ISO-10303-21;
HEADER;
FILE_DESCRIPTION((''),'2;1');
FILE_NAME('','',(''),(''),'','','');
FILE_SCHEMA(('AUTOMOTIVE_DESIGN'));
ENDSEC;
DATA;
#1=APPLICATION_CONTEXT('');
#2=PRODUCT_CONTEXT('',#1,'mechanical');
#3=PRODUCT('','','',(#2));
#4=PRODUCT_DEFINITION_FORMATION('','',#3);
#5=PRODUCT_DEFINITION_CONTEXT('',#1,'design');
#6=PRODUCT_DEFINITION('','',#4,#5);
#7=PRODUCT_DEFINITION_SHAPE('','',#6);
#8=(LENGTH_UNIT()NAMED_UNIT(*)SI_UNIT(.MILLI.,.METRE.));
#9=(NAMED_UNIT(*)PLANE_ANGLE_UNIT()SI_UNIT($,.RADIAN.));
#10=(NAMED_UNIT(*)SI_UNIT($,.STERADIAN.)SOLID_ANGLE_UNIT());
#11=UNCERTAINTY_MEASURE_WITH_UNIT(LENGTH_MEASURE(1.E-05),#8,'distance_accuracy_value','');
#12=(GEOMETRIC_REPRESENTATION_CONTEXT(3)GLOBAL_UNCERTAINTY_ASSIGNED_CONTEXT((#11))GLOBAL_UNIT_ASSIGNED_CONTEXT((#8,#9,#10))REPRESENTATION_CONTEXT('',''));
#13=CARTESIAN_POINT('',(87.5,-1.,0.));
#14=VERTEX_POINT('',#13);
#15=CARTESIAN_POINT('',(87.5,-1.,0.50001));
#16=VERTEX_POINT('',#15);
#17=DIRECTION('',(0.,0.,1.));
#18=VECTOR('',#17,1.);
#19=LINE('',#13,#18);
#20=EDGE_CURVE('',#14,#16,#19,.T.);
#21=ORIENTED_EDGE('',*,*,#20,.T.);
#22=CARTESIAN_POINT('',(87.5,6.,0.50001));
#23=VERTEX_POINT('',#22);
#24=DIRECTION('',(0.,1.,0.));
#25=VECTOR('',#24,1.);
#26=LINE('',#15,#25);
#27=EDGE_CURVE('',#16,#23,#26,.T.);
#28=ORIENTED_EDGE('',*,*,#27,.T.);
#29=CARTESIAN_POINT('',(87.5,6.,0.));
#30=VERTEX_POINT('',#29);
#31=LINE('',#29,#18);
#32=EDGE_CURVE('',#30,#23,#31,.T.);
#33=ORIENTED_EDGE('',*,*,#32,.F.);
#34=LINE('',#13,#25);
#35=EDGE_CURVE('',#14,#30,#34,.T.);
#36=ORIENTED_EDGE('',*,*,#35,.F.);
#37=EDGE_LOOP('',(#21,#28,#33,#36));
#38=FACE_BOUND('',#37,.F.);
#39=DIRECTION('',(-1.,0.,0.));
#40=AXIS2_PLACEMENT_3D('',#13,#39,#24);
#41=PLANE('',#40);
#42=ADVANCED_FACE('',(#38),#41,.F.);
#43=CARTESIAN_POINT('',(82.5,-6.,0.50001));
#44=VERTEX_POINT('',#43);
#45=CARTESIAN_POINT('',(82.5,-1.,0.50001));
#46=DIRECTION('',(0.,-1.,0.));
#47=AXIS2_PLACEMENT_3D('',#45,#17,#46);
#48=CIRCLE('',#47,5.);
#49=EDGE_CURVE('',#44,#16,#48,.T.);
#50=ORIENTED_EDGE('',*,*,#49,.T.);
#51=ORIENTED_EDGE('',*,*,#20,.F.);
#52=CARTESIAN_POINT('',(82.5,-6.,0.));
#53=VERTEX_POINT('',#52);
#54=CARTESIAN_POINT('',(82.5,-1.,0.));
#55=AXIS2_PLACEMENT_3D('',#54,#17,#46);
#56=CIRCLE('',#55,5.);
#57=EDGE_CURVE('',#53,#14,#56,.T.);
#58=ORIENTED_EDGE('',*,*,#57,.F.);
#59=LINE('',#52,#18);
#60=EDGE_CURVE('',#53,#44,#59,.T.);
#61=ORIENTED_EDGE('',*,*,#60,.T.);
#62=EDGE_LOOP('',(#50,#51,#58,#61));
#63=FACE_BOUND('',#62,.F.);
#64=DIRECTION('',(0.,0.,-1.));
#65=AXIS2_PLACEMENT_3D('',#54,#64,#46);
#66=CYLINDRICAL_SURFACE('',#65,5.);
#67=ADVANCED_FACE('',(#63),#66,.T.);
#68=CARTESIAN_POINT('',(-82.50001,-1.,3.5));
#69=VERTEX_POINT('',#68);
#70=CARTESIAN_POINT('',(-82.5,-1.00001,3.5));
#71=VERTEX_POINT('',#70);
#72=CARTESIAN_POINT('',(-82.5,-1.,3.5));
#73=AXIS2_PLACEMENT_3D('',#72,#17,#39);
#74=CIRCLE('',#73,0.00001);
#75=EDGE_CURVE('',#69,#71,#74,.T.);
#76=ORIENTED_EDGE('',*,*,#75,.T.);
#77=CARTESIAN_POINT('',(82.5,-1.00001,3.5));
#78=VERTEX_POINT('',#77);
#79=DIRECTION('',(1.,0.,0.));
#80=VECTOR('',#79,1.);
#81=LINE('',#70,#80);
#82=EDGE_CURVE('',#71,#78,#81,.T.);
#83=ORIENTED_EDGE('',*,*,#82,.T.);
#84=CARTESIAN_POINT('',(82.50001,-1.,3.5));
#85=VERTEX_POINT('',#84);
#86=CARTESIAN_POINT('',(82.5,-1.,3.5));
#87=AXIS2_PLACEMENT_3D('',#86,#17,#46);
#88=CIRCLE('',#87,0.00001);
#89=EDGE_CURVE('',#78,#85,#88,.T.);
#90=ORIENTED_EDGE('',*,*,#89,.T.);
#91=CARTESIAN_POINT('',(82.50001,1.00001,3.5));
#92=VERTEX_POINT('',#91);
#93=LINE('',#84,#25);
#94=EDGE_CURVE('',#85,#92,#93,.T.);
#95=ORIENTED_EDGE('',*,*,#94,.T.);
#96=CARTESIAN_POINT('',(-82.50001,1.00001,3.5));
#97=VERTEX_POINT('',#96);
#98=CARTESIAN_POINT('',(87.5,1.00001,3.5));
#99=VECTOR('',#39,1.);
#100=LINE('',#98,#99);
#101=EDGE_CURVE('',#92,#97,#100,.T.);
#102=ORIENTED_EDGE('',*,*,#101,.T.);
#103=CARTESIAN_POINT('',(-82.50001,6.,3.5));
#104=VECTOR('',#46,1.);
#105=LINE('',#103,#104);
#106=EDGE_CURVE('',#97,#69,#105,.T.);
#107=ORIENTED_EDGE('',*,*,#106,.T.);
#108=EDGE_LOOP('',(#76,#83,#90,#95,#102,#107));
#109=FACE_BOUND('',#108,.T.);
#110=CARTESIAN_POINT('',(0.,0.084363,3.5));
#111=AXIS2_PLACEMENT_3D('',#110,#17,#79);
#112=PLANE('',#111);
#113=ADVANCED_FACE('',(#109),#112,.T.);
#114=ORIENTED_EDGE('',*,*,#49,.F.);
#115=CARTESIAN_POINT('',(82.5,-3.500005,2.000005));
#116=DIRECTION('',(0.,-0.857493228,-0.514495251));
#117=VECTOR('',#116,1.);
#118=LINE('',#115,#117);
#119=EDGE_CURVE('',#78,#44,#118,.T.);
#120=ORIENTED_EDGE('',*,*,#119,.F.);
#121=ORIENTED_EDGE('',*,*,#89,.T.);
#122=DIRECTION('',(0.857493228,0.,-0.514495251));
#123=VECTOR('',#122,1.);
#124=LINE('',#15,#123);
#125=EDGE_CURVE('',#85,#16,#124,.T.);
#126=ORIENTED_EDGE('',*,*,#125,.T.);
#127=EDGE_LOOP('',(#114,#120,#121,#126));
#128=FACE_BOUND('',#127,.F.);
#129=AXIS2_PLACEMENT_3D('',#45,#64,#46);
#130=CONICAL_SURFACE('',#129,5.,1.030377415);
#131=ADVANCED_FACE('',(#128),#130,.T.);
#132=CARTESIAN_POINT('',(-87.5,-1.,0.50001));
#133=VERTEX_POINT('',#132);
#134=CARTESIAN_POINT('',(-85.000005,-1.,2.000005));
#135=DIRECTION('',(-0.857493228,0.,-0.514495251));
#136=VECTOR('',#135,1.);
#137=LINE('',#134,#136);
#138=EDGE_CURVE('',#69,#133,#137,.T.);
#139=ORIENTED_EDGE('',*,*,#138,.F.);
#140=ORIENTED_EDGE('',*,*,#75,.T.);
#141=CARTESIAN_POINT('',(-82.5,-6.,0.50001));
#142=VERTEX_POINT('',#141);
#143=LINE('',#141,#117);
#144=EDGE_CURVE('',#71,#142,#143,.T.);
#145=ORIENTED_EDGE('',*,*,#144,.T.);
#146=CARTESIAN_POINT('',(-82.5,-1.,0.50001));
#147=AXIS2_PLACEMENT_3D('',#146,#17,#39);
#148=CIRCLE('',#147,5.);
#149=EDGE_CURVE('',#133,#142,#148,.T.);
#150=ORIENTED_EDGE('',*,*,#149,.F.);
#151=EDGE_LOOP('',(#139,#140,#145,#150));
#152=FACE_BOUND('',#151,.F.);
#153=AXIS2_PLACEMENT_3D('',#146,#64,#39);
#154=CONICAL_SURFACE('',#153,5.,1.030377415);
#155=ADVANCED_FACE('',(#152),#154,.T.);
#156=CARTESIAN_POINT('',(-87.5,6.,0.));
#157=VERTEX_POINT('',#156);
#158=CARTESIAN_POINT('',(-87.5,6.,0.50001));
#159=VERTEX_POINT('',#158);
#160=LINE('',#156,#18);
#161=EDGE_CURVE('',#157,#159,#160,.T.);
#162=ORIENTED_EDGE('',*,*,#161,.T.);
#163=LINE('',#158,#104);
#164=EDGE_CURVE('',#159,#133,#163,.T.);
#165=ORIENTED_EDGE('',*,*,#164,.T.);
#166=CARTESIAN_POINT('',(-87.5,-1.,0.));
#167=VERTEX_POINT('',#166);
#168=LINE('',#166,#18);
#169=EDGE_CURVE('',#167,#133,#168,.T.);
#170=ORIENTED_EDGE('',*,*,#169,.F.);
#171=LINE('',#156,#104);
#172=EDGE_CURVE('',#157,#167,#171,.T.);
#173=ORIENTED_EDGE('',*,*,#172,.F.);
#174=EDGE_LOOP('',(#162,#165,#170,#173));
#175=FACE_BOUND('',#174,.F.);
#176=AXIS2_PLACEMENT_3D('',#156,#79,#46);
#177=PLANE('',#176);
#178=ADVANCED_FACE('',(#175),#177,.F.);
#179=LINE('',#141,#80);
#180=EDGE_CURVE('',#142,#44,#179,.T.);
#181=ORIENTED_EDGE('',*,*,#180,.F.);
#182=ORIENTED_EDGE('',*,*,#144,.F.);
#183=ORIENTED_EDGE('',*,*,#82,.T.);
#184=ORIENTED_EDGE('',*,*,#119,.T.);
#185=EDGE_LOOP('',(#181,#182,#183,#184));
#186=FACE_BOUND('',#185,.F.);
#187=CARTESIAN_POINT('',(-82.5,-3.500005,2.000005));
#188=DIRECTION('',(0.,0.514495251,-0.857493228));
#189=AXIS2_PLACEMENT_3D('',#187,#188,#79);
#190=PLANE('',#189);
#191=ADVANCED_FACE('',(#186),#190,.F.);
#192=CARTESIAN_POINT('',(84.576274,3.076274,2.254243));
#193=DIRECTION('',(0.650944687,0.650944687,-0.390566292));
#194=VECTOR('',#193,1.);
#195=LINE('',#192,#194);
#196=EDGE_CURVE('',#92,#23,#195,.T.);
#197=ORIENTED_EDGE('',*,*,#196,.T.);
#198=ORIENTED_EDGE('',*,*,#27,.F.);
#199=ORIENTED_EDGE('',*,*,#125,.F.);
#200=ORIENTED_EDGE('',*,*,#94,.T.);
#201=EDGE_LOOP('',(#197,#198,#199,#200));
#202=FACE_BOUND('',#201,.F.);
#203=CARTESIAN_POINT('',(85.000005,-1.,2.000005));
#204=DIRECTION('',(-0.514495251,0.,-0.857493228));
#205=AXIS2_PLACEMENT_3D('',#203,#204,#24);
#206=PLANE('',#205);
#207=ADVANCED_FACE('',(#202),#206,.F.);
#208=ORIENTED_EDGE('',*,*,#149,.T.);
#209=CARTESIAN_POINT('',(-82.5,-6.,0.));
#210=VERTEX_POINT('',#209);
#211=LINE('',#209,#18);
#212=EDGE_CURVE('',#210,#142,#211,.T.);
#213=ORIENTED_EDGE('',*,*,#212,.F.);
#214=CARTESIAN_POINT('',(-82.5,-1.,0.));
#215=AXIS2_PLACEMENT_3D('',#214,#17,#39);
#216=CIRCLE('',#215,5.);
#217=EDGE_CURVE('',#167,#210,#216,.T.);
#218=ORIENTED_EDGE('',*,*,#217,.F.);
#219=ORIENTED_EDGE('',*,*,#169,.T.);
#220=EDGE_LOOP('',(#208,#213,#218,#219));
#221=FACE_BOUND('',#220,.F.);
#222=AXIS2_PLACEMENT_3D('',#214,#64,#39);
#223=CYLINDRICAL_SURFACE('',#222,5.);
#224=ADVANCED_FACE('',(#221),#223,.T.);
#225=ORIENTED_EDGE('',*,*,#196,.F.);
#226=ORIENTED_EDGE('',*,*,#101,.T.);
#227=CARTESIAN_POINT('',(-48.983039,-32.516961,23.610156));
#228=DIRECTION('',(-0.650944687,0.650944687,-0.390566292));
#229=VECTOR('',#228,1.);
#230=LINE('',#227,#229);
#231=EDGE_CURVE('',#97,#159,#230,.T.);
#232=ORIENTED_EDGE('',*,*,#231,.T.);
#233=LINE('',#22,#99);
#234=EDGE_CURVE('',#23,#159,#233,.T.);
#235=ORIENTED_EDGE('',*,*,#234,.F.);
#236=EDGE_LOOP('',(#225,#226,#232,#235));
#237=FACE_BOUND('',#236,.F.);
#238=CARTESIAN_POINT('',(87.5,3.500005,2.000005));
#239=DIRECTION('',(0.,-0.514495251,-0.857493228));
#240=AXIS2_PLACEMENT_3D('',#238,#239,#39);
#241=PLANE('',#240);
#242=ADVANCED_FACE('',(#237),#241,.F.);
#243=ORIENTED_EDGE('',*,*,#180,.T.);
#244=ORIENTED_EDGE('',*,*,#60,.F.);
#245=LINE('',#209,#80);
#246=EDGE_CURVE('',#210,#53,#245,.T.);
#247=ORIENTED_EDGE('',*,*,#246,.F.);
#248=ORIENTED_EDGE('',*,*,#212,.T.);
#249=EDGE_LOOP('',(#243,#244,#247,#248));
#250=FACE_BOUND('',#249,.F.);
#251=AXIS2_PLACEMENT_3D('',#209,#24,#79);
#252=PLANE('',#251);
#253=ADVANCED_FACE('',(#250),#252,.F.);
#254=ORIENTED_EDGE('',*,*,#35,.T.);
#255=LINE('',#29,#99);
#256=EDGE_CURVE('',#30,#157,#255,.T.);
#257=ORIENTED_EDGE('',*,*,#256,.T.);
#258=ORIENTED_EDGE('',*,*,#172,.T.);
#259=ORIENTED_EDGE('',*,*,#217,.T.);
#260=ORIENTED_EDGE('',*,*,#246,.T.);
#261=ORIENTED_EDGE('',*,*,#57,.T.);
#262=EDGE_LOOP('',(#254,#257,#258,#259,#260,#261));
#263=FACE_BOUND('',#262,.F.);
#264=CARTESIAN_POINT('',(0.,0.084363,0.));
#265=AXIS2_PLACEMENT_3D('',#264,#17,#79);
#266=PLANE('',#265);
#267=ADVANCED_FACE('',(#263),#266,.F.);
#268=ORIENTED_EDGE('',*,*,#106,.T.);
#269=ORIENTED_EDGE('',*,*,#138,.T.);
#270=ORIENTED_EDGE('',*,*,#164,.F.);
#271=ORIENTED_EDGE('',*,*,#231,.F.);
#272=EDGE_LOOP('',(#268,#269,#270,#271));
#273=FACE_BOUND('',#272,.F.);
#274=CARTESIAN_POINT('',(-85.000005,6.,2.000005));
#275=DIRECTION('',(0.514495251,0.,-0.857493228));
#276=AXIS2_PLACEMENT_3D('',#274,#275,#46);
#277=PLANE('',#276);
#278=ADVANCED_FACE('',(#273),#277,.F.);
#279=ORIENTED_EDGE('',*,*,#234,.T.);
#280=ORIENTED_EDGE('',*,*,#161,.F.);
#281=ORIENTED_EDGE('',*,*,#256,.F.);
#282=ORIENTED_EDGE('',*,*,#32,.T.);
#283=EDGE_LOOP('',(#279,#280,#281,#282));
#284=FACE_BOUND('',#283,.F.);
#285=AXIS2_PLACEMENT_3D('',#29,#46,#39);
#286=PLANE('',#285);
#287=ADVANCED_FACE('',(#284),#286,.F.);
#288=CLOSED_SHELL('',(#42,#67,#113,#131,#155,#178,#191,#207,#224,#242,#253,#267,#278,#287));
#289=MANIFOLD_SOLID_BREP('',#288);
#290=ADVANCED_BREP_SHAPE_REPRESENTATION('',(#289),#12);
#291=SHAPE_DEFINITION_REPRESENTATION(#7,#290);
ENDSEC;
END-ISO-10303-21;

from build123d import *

# Parameters (mm, degrees)
F1_DEPTH = 3.5
F2_SIZE2 = 2.99999
F2_SIZE  = 4.99999


# Not quite as in the source:
# - a fillet or chamfer is up to 0.001 mm smaller than in the source, because OpenCascade refuses the exact size


with BuildPart() as f1:
    # F0 (on Top) → F1 (new body)
    with BuildSketch(Plane.XY):
        with BuildLine():
            Line((-82.5, -6), (82.5, -6))
            ThreePointArc((82.5, -6), (86.0355339059, -4.5355339059), (87.5, -1))
            Line((87.5, -1), (87.5, 6))
            Line((87.5, 6), (-87.5, 6))
            Line((-87.5, 6), (-87.5, -1))
            ThreePointArc((-87.5, -1), (-86.0355339059, -4.5355339059), (-82.5, -6))
        make_face()
    extrude(amount=F1_DEPTH)

    # F2 (size 5 and 3 in the source; OpenCascade refuses exactly that, so slightly less here)
    f2_edges = [f1.edges().sort_by_distance(p)[0] for p in [
        (0, 6, 3.5),
        (87.5, 2.5, 3.5),
    ]]
    f2_side = f1.faces().sort_by_distance((0, 0.025079, 3.5))[0]
    chamfer(f2_edges, length=F2_SIZE, length2=F2_SIZE2, reference=f2_side)


solid = f1.part
